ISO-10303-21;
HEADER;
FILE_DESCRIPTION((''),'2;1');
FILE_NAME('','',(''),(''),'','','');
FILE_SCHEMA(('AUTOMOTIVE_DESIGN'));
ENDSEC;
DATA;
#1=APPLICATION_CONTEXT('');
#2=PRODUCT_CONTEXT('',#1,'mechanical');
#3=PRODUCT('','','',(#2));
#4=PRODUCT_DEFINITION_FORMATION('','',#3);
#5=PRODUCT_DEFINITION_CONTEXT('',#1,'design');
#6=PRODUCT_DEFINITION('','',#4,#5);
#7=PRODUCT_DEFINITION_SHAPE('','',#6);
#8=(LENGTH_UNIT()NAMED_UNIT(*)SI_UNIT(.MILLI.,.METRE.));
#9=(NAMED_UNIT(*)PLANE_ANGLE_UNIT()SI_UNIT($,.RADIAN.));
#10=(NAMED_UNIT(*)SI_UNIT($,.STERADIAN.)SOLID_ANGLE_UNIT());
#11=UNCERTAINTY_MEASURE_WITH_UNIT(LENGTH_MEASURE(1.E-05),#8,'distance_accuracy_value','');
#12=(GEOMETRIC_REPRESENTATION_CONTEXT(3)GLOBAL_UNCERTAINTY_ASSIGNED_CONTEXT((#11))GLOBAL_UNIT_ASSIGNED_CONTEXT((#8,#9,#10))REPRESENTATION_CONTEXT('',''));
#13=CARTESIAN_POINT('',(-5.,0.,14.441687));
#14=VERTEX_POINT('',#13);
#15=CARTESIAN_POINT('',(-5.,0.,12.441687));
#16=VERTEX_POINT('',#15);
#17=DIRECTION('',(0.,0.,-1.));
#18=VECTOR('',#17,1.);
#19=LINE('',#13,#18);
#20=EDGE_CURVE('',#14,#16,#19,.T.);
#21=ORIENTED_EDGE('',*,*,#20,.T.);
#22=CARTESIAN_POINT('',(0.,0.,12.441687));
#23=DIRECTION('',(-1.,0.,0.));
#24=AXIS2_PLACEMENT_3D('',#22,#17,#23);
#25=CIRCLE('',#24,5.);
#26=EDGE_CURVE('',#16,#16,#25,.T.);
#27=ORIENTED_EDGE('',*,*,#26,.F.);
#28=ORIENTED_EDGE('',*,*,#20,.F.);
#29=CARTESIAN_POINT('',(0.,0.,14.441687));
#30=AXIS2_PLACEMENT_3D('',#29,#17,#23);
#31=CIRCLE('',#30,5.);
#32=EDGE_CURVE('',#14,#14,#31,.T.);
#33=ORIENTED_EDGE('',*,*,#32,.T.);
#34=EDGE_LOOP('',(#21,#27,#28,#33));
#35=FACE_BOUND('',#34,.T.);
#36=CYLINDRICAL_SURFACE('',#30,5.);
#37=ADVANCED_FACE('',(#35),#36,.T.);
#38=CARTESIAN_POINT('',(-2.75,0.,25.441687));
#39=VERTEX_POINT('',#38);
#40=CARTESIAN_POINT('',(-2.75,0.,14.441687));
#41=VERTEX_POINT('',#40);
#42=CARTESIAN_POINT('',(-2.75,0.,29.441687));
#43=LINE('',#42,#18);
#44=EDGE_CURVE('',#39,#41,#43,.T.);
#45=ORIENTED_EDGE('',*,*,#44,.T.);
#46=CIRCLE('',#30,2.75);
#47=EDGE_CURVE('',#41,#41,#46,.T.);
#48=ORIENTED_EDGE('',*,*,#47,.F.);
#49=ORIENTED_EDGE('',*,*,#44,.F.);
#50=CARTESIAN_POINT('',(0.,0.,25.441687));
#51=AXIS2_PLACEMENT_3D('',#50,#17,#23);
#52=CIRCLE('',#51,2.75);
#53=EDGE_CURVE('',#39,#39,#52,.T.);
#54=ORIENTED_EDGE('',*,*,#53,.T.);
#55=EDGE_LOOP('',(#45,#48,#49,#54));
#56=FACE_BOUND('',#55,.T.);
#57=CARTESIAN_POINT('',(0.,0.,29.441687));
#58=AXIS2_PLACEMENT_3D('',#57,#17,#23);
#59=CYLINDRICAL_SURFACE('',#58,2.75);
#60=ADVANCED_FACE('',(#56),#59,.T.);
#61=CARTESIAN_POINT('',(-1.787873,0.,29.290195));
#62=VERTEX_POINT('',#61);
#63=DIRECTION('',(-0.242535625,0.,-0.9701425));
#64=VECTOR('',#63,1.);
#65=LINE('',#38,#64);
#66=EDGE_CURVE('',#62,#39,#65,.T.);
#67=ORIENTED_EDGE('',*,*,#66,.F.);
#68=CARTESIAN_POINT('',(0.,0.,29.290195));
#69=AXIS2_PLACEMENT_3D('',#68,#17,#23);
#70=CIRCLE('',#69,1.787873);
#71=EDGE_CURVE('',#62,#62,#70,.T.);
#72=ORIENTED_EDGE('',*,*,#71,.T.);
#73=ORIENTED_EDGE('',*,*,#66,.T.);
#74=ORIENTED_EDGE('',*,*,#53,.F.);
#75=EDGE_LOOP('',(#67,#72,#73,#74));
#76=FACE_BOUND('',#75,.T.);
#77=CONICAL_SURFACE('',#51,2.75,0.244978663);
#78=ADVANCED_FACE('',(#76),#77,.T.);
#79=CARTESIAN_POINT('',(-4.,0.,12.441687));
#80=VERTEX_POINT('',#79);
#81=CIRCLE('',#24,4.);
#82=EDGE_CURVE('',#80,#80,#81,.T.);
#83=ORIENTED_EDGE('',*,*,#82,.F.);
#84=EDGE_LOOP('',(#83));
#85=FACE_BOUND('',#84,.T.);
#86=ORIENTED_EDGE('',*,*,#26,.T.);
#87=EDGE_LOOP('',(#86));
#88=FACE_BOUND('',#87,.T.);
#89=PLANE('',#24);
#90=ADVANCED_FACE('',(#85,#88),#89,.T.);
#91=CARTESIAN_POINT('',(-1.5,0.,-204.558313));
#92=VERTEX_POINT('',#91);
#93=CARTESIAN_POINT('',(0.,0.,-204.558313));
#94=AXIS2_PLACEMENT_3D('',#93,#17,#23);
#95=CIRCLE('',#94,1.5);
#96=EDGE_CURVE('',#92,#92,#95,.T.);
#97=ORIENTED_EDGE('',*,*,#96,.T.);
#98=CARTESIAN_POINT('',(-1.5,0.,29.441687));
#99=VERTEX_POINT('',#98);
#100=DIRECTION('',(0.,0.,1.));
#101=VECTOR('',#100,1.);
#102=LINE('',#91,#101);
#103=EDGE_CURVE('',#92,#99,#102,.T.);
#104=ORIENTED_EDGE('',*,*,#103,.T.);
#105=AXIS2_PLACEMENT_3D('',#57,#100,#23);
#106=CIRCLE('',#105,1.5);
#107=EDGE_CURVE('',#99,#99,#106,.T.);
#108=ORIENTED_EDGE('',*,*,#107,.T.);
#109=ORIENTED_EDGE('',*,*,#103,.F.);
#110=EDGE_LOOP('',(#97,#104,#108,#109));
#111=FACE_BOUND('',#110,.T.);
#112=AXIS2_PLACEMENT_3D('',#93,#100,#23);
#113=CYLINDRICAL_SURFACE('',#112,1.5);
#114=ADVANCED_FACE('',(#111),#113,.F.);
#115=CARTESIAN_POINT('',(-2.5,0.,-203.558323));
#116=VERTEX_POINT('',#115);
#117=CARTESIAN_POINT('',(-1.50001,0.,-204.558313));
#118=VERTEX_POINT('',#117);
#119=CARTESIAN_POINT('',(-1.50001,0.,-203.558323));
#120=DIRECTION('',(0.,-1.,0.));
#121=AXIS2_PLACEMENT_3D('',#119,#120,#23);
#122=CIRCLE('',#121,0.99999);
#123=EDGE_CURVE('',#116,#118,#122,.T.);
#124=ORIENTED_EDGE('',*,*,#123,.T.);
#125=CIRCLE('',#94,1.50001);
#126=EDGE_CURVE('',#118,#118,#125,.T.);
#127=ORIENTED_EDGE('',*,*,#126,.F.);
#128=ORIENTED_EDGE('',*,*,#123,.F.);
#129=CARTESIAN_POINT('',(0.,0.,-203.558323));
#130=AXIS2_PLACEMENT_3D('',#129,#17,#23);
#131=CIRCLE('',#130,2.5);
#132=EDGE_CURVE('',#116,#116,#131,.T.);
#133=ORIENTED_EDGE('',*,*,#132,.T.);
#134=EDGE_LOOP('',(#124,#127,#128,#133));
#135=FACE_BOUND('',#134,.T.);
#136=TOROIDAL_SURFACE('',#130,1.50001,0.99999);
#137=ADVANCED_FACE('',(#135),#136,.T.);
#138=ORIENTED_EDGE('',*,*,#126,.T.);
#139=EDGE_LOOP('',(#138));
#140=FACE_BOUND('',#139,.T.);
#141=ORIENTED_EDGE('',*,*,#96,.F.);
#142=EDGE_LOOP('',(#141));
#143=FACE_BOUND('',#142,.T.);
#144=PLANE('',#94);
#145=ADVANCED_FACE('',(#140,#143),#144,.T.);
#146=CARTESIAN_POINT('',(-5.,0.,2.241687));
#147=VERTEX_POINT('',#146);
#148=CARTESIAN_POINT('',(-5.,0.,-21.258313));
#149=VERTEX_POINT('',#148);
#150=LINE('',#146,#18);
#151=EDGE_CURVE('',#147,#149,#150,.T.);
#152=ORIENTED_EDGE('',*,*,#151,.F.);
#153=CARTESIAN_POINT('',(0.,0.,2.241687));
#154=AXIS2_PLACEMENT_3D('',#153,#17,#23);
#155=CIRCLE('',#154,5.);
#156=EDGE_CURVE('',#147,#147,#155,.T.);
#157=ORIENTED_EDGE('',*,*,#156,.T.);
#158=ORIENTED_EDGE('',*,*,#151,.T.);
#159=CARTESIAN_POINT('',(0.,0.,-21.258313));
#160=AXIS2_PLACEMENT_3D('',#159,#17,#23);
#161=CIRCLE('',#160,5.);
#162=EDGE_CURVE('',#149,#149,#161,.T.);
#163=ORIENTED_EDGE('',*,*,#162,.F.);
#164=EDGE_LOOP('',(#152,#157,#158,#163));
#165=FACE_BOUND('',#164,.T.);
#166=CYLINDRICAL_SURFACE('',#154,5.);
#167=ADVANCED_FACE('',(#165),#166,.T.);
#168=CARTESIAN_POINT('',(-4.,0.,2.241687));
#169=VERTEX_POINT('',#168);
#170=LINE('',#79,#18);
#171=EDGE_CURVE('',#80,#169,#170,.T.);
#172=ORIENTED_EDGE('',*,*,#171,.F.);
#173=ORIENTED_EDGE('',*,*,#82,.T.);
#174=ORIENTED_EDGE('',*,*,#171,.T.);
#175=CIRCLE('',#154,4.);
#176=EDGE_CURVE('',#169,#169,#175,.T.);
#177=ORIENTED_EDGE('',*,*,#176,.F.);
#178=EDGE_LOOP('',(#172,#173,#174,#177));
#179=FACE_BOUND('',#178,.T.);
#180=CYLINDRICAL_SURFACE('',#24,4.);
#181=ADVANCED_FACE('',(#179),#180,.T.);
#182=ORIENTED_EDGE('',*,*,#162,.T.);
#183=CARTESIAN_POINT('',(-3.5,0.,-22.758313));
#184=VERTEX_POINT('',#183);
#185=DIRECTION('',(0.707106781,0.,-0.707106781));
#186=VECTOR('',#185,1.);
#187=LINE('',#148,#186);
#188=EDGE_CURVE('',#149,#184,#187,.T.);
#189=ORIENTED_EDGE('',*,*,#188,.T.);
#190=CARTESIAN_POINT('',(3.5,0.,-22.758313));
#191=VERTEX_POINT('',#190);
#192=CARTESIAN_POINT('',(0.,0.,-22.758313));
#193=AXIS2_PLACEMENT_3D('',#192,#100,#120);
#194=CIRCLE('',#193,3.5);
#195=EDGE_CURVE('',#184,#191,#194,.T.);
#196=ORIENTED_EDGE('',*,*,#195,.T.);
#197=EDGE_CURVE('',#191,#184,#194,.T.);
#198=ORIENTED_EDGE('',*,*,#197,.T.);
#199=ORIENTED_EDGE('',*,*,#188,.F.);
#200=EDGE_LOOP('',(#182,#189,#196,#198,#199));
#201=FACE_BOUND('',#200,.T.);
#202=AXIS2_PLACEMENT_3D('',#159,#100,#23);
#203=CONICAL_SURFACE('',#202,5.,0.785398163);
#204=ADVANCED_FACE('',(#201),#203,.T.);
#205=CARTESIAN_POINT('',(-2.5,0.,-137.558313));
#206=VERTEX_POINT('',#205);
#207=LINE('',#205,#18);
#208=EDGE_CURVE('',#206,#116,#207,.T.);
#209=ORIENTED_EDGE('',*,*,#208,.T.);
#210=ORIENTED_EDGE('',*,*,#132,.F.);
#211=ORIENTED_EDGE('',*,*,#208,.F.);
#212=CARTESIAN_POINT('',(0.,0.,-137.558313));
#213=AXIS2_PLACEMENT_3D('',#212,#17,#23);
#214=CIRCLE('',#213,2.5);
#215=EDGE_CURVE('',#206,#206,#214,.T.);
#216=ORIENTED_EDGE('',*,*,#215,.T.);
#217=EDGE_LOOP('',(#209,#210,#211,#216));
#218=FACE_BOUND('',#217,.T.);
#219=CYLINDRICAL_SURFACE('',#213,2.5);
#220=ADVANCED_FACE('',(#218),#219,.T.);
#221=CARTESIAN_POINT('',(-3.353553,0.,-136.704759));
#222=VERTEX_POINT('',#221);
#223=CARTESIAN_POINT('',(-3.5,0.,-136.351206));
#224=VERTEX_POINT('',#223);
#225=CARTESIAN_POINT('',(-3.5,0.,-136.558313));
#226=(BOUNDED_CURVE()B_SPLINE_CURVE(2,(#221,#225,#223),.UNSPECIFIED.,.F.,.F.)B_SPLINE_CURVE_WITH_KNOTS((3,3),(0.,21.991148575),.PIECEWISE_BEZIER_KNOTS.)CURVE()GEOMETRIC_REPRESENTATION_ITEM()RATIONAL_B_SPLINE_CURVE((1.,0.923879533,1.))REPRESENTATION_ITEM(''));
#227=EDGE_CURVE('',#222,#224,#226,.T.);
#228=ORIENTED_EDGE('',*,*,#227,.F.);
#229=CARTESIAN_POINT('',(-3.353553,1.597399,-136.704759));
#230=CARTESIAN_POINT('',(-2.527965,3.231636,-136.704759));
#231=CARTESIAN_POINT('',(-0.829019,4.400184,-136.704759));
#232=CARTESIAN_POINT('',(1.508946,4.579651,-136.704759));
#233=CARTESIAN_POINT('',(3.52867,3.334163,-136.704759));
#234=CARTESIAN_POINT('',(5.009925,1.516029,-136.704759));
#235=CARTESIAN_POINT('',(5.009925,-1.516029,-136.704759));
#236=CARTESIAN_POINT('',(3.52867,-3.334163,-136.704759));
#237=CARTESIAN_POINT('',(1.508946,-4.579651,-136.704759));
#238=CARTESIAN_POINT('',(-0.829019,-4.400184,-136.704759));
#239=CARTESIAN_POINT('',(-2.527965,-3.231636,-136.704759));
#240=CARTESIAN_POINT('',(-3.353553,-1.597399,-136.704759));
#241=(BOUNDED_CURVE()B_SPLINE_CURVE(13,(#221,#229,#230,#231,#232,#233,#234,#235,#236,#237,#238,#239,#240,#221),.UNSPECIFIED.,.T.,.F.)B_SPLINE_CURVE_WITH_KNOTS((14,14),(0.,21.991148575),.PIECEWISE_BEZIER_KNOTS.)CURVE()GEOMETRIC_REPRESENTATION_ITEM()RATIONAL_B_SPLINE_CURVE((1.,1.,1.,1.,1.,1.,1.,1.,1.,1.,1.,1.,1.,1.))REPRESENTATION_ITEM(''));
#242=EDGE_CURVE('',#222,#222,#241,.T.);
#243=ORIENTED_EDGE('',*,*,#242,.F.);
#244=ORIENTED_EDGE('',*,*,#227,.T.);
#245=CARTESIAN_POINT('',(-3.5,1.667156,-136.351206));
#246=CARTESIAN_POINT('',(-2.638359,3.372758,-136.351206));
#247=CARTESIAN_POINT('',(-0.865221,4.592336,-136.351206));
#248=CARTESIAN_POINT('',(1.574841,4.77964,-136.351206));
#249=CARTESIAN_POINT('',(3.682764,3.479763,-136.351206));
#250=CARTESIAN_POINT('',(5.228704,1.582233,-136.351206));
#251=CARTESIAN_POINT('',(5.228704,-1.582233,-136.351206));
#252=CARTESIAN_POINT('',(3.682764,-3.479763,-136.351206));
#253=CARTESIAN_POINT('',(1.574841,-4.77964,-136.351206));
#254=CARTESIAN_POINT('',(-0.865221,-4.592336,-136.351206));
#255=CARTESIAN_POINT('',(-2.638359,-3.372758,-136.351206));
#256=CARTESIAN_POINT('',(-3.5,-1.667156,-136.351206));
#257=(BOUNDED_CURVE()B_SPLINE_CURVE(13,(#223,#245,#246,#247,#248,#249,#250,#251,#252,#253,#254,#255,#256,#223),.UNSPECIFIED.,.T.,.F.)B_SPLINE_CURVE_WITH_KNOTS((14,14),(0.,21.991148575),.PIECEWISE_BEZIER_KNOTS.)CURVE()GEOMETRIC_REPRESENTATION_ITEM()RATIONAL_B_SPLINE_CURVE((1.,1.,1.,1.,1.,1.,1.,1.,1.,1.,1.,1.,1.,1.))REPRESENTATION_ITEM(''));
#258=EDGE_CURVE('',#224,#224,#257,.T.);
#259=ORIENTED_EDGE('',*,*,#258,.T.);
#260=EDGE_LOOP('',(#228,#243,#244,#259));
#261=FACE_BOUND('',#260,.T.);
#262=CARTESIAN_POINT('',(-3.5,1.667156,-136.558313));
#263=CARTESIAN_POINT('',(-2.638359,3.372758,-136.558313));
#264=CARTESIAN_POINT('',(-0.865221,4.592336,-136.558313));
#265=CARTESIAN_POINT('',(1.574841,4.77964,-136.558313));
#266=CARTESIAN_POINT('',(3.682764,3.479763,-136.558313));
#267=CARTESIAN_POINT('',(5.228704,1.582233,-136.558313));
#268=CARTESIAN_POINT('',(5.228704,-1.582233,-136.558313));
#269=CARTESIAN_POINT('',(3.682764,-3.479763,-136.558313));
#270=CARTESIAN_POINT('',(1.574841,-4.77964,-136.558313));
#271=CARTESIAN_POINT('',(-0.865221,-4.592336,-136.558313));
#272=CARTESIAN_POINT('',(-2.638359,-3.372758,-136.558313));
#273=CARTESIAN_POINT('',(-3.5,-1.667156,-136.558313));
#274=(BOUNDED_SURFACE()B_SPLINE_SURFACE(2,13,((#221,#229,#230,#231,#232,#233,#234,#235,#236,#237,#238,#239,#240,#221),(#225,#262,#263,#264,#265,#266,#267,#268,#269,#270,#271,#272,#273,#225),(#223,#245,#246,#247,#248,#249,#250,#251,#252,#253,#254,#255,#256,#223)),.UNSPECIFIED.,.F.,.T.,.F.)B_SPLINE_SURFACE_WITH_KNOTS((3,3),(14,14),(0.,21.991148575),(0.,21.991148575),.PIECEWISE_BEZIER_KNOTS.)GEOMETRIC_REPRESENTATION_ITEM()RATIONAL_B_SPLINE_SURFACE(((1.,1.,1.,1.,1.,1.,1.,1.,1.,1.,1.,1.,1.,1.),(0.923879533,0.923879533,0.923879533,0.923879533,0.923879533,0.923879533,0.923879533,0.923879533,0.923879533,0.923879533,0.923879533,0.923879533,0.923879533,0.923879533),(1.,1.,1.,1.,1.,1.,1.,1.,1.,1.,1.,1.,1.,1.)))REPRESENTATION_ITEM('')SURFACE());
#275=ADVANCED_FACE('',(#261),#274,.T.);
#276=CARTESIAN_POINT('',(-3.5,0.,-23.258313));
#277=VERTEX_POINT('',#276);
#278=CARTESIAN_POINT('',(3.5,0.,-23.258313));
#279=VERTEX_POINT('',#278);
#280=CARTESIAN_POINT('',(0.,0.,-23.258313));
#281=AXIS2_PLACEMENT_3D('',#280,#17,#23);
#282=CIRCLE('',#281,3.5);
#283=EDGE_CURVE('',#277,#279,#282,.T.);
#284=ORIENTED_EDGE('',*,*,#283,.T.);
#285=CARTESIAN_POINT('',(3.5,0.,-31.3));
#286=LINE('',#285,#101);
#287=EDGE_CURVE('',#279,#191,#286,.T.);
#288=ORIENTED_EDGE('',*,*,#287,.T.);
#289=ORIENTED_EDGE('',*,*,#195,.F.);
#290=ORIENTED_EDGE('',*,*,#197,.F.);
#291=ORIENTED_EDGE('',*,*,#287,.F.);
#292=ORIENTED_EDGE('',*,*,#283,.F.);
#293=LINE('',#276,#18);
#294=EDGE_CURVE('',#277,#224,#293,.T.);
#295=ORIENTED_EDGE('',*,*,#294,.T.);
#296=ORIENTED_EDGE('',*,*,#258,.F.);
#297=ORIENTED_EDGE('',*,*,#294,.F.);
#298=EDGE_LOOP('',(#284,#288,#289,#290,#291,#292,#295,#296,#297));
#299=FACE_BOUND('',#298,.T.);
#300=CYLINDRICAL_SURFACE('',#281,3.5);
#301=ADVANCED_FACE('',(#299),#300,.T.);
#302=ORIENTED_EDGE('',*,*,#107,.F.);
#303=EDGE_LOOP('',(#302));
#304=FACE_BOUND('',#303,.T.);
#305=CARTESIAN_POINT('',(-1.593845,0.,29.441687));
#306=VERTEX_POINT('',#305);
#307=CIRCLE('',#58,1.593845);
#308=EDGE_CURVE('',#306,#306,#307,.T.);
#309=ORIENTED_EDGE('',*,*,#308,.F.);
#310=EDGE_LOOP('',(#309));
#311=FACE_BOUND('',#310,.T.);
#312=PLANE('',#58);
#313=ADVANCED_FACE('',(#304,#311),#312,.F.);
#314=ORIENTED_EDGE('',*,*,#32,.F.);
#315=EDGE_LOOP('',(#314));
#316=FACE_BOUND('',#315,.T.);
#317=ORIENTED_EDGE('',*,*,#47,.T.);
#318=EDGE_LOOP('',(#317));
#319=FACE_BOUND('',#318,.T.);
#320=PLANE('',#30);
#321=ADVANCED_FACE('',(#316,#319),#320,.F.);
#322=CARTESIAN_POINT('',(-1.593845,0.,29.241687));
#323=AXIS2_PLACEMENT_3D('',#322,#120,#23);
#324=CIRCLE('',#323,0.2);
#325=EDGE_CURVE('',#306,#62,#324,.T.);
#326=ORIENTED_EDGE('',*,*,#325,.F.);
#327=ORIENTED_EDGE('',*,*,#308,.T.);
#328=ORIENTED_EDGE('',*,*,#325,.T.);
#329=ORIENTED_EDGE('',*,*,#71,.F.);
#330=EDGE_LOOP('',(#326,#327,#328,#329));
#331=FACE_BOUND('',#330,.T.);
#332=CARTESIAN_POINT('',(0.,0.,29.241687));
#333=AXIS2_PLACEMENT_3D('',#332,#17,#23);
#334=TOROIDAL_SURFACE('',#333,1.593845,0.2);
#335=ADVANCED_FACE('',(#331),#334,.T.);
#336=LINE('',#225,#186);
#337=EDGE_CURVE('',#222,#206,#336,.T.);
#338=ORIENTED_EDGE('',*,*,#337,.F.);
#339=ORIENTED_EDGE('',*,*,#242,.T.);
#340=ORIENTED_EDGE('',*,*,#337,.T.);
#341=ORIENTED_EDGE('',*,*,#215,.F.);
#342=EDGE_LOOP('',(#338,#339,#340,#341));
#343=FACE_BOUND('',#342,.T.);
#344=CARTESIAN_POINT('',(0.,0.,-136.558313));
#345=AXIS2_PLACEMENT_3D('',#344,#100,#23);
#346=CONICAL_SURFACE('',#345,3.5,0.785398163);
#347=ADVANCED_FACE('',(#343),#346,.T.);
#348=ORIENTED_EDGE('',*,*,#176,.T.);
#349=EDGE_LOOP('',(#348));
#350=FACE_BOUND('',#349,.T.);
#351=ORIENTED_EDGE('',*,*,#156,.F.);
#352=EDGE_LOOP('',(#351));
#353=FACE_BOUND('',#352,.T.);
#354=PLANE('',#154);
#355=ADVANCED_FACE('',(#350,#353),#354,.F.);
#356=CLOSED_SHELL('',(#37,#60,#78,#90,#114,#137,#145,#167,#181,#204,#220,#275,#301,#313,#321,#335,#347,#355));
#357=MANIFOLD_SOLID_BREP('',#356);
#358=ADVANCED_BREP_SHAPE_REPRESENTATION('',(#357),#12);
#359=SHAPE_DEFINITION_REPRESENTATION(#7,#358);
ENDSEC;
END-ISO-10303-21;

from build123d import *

# Parameters (mm, degrees)
F3_R        = 1.5
F4_DEPTH    = 235.059312583
F5_S5_R     = 3.5
F5_T6_DEPTH = 9
F6_SIZE2    = 4
F6_SIZE     = 1
F7_R        = 0.2
F8_R        = 0.5
F9_R        = 0.99999


# Not quite as in the source:
# - a fillet or chamfer that OpenCascade refuses, or shapes differently, is made with other operations: its cross-section is extruded or revolved along the edge and cut away or added
# - a fillet or chamfer is up to 0.001 mm smaller than in the source, because OpenCascade refuses the exact size


with BuildPart() as f1:
    # F0 (on Front) → F1 (revolve)
    with BuildSketch(Plane.XZ):
        Polygon((-1.5, -204.558312583), (-1.5, 29.441687417), (-2.75, 28.441687417), (-2.75, 14.441687417), (-5, 14.441687417), (-5, 12.441687417), (-4, 12.441687417), (-4, 2.241687417), (-5, 2.241687417), (-5, -22.258312583), (-3.5, -23.258312583), (-3.5, -136.558312583), (-2.5, -137.558312583), (-2.5, -204.558312583), align=None)
        Polygon((-5, -23.258312583), (-3.5, -23.258312583), (-5, -22.258312583), align=None)
        Polygon((-2.75, 28.441687417), (-1.5, 29.441687417), (-2.75, 29.441687417), align=None)
    revolve(axis=Axis((0, 0, -86.958312583), (0, 0, -1)))

    # F3 (on offset) → F4 (cut, through all)
    with BuildSketch(Plane.XY.offset(30.5)):
        Circle(F3_R)
    extrude(amount=-F4_DEPTH, mode=Mode.SUBTRACT)

    # F5: chamfer of 2 on 1 edges, made by hand


with BuildPart() as f5_tool2:
    # F5_s3 → F5_t4 (revolve)
    with BuildSketch(Plane.XZ):
        Polygon((-5, -21.258312583), (-3, -23.258312583), (-5, -23.258312583), align=None)
    revolve(axis=Axis((0, 0, -23.258312583), (0, 0, -1)))

    # F5_s5 → F5_t6 (cut, symmetric)
    with BuildSketch(Plane.XY.offset(-22.3)):
        Circle(F5_S5_R)
    extrude(amount=F5_T6_DEPTH, both=True, mode=Mode.SUBTRACT)


with BuildPart() as f1_1:
    add(f1.part)

    # F5_t1: cut F5_tool2
    add(f5_tool2.part, mode=Mode.SUBTRACT)

    # F6
    f6_edges = [f1_1.edges().sort_by_distance(p)[0] for p in [
        (2.75, 0, 29.441687),
    ]]
    chamfer(f6_edges, length=F6_SIZE, length2=F6_SIZE2)

    # F7
    f7_edges = [f1_1.edges().sort_by_distance(p)[0] for p in [
        (1.75, 0, 29.441687),
    ]]
    fillet(f7_edges, radius=F7_R)

    # F8
    f8_edges = [f1_1.edges().sort_by_distance(p)[0] for p in [
        (3.5, 0, -136.558313),
    ]]
    fillet(f8_edges, radius=F8_R)

    # F9 (radius 1 in the source; OpenCascade refuses exactly that, so slightly less here)
    f9_edges = [f1_1.edges().sort_by_distance(p)[0] for p in [
        (2.5, 0, -204.558313),
    ]]
    fillet(f9_edges, radius=F9_R)


solid = f1_1.part
